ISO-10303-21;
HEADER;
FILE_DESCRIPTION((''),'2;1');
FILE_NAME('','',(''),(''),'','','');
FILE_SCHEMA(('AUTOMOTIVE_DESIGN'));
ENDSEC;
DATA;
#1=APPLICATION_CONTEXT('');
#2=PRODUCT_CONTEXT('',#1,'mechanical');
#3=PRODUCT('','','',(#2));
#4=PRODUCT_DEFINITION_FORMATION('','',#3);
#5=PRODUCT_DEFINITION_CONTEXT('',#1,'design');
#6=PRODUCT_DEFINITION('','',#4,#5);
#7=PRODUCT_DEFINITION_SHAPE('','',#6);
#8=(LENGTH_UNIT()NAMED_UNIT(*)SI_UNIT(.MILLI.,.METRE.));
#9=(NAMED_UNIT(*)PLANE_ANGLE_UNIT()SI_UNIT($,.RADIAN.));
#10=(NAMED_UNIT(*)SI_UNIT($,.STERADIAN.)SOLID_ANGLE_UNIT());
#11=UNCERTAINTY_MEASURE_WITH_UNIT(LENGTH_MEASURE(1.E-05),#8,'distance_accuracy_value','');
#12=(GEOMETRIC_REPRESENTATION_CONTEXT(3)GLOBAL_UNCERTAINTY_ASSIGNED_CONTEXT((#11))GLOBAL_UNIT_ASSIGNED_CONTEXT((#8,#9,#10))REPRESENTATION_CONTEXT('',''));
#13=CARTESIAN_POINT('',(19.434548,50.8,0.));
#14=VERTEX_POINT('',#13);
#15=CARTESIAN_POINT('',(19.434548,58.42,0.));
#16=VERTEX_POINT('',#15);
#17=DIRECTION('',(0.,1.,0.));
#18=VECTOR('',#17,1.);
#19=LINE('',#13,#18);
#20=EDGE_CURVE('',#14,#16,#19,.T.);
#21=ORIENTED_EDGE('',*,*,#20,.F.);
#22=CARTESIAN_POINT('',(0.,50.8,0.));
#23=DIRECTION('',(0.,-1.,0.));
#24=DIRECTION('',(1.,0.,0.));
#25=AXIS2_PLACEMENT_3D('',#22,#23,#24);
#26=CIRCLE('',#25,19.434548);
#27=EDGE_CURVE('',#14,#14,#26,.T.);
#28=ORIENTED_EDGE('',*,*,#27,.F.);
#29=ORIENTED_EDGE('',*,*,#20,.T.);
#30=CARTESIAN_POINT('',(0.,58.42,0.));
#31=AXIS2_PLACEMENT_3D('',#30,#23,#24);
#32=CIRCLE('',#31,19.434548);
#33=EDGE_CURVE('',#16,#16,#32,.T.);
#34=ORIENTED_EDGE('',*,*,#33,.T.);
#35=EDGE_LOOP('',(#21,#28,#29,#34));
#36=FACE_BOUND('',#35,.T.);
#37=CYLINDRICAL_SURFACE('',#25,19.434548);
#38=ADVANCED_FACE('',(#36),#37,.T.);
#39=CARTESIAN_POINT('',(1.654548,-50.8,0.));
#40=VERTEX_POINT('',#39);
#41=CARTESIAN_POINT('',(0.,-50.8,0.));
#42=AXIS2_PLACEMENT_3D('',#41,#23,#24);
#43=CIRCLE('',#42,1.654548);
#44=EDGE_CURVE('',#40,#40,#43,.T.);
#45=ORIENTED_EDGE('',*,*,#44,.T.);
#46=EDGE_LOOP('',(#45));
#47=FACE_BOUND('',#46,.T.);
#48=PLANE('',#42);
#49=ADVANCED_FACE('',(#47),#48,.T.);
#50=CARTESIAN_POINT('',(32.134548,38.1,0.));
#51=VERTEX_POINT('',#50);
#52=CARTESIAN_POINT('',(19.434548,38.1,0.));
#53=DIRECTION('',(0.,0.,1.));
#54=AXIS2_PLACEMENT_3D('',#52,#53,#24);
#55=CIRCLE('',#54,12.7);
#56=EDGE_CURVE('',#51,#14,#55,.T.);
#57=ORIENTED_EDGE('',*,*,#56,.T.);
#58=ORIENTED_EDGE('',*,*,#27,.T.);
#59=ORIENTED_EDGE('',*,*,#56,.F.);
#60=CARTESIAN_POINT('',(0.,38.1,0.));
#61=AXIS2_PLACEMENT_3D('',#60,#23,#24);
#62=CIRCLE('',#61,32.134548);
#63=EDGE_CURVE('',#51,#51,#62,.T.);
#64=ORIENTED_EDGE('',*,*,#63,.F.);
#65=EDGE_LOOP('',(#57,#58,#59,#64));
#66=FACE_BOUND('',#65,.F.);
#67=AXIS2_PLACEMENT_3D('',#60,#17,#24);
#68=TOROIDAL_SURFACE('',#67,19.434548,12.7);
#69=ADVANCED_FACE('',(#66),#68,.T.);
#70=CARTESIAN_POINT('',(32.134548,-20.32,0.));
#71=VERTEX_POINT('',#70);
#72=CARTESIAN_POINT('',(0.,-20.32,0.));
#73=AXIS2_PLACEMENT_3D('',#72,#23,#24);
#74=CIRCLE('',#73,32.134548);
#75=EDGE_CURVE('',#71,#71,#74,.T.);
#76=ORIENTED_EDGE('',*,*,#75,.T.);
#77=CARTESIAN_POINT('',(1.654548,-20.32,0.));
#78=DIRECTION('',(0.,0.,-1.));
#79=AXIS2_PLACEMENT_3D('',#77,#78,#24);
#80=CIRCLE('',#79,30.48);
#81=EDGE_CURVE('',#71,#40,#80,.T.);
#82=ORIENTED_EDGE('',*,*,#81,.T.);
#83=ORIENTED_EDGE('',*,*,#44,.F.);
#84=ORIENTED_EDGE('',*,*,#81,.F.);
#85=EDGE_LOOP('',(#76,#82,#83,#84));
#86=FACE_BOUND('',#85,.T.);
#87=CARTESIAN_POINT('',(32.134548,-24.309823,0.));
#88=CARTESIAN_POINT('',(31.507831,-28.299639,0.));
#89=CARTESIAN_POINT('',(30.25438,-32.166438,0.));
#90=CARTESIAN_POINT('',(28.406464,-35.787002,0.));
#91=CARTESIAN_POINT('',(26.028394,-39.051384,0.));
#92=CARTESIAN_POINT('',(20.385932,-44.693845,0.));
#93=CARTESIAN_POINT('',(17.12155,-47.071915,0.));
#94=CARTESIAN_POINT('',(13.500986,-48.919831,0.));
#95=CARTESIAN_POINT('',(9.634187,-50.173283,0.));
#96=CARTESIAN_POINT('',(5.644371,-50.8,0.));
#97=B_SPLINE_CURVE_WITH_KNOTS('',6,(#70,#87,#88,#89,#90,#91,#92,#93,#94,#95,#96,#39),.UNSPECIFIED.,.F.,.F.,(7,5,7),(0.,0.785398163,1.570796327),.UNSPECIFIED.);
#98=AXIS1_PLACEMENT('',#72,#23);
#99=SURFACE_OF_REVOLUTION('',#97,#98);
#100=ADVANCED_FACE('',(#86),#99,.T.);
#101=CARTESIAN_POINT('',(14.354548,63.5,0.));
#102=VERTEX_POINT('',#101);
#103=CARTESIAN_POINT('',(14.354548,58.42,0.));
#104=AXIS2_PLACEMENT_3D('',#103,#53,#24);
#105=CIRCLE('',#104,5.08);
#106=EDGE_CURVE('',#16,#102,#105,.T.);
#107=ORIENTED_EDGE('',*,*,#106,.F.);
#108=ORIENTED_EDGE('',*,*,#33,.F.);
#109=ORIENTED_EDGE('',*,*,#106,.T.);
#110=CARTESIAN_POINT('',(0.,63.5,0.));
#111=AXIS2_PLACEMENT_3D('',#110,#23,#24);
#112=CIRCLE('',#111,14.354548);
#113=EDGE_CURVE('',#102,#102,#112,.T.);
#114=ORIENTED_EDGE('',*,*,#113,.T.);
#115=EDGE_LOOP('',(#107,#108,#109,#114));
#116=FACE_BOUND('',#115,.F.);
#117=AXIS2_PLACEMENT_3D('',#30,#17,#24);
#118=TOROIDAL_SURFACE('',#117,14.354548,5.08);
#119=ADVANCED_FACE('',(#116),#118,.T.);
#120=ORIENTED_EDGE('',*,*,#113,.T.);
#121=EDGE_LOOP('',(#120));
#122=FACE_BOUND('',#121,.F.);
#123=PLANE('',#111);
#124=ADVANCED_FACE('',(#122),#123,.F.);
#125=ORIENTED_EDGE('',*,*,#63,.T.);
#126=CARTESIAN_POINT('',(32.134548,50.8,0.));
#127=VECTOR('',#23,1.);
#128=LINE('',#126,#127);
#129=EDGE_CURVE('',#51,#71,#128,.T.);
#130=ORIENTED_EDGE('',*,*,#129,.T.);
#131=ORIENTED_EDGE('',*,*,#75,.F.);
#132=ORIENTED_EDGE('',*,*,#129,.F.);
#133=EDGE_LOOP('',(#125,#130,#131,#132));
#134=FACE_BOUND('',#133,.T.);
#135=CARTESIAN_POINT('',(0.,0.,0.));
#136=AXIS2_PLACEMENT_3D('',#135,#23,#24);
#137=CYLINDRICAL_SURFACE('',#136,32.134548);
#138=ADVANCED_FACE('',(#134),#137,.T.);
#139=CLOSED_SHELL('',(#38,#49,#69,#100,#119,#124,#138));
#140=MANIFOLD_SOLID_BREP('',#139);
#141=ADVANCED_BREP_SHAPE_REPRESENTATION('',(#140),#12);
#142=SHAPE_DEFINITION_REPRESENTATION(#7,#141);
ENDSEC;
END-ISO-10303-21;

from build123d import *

# Parameters (mm, degrees)
F0_R     = 32.1345484261
F1_DEPTH = 50.8
F2_R     = 30.48
F3_R     = 12.7
F4_DEPTH = 12.7
F5_R     = 5.08


with BuildPart() as f1:
    # F0 (on Front) → F1 (new body, symmetric)
    with BuildSketch(Plane.XZ):
        Circle(F0_R)
    extrude(amount=F1_DEPTH, both=True)

    # F2
    f2_edges = [f1.edges().sort_by_distance(p)[0] for p in [
        (-32.134548, -50.8, 0),
    ]]
    fillet(f2_edges, radius=F2_R)

    # F3
    f3_edges = [f1.edges().sort_by_distance(p)[0] for p in [
        (-32.134548, 50.8, 0),
    ]]
    fillet(f3_edges, radius=F3_R)

    # F4 (add): a face of the model
    f4_faces = [f1.faces().sort_by_distance(p)[0] for p in [
        (0, 50.8, 0),
    ]]
    extrude(f4_faces, amount=F4_DEPTH)

    # F5
    f5_edges = [f1.edges().sort_by_distance(p)[0] for p in [
        (-19.434548, 63.5, 0),
    ]]
    fillet(f5_edges, radius=F5_R)


solid = f1.part
